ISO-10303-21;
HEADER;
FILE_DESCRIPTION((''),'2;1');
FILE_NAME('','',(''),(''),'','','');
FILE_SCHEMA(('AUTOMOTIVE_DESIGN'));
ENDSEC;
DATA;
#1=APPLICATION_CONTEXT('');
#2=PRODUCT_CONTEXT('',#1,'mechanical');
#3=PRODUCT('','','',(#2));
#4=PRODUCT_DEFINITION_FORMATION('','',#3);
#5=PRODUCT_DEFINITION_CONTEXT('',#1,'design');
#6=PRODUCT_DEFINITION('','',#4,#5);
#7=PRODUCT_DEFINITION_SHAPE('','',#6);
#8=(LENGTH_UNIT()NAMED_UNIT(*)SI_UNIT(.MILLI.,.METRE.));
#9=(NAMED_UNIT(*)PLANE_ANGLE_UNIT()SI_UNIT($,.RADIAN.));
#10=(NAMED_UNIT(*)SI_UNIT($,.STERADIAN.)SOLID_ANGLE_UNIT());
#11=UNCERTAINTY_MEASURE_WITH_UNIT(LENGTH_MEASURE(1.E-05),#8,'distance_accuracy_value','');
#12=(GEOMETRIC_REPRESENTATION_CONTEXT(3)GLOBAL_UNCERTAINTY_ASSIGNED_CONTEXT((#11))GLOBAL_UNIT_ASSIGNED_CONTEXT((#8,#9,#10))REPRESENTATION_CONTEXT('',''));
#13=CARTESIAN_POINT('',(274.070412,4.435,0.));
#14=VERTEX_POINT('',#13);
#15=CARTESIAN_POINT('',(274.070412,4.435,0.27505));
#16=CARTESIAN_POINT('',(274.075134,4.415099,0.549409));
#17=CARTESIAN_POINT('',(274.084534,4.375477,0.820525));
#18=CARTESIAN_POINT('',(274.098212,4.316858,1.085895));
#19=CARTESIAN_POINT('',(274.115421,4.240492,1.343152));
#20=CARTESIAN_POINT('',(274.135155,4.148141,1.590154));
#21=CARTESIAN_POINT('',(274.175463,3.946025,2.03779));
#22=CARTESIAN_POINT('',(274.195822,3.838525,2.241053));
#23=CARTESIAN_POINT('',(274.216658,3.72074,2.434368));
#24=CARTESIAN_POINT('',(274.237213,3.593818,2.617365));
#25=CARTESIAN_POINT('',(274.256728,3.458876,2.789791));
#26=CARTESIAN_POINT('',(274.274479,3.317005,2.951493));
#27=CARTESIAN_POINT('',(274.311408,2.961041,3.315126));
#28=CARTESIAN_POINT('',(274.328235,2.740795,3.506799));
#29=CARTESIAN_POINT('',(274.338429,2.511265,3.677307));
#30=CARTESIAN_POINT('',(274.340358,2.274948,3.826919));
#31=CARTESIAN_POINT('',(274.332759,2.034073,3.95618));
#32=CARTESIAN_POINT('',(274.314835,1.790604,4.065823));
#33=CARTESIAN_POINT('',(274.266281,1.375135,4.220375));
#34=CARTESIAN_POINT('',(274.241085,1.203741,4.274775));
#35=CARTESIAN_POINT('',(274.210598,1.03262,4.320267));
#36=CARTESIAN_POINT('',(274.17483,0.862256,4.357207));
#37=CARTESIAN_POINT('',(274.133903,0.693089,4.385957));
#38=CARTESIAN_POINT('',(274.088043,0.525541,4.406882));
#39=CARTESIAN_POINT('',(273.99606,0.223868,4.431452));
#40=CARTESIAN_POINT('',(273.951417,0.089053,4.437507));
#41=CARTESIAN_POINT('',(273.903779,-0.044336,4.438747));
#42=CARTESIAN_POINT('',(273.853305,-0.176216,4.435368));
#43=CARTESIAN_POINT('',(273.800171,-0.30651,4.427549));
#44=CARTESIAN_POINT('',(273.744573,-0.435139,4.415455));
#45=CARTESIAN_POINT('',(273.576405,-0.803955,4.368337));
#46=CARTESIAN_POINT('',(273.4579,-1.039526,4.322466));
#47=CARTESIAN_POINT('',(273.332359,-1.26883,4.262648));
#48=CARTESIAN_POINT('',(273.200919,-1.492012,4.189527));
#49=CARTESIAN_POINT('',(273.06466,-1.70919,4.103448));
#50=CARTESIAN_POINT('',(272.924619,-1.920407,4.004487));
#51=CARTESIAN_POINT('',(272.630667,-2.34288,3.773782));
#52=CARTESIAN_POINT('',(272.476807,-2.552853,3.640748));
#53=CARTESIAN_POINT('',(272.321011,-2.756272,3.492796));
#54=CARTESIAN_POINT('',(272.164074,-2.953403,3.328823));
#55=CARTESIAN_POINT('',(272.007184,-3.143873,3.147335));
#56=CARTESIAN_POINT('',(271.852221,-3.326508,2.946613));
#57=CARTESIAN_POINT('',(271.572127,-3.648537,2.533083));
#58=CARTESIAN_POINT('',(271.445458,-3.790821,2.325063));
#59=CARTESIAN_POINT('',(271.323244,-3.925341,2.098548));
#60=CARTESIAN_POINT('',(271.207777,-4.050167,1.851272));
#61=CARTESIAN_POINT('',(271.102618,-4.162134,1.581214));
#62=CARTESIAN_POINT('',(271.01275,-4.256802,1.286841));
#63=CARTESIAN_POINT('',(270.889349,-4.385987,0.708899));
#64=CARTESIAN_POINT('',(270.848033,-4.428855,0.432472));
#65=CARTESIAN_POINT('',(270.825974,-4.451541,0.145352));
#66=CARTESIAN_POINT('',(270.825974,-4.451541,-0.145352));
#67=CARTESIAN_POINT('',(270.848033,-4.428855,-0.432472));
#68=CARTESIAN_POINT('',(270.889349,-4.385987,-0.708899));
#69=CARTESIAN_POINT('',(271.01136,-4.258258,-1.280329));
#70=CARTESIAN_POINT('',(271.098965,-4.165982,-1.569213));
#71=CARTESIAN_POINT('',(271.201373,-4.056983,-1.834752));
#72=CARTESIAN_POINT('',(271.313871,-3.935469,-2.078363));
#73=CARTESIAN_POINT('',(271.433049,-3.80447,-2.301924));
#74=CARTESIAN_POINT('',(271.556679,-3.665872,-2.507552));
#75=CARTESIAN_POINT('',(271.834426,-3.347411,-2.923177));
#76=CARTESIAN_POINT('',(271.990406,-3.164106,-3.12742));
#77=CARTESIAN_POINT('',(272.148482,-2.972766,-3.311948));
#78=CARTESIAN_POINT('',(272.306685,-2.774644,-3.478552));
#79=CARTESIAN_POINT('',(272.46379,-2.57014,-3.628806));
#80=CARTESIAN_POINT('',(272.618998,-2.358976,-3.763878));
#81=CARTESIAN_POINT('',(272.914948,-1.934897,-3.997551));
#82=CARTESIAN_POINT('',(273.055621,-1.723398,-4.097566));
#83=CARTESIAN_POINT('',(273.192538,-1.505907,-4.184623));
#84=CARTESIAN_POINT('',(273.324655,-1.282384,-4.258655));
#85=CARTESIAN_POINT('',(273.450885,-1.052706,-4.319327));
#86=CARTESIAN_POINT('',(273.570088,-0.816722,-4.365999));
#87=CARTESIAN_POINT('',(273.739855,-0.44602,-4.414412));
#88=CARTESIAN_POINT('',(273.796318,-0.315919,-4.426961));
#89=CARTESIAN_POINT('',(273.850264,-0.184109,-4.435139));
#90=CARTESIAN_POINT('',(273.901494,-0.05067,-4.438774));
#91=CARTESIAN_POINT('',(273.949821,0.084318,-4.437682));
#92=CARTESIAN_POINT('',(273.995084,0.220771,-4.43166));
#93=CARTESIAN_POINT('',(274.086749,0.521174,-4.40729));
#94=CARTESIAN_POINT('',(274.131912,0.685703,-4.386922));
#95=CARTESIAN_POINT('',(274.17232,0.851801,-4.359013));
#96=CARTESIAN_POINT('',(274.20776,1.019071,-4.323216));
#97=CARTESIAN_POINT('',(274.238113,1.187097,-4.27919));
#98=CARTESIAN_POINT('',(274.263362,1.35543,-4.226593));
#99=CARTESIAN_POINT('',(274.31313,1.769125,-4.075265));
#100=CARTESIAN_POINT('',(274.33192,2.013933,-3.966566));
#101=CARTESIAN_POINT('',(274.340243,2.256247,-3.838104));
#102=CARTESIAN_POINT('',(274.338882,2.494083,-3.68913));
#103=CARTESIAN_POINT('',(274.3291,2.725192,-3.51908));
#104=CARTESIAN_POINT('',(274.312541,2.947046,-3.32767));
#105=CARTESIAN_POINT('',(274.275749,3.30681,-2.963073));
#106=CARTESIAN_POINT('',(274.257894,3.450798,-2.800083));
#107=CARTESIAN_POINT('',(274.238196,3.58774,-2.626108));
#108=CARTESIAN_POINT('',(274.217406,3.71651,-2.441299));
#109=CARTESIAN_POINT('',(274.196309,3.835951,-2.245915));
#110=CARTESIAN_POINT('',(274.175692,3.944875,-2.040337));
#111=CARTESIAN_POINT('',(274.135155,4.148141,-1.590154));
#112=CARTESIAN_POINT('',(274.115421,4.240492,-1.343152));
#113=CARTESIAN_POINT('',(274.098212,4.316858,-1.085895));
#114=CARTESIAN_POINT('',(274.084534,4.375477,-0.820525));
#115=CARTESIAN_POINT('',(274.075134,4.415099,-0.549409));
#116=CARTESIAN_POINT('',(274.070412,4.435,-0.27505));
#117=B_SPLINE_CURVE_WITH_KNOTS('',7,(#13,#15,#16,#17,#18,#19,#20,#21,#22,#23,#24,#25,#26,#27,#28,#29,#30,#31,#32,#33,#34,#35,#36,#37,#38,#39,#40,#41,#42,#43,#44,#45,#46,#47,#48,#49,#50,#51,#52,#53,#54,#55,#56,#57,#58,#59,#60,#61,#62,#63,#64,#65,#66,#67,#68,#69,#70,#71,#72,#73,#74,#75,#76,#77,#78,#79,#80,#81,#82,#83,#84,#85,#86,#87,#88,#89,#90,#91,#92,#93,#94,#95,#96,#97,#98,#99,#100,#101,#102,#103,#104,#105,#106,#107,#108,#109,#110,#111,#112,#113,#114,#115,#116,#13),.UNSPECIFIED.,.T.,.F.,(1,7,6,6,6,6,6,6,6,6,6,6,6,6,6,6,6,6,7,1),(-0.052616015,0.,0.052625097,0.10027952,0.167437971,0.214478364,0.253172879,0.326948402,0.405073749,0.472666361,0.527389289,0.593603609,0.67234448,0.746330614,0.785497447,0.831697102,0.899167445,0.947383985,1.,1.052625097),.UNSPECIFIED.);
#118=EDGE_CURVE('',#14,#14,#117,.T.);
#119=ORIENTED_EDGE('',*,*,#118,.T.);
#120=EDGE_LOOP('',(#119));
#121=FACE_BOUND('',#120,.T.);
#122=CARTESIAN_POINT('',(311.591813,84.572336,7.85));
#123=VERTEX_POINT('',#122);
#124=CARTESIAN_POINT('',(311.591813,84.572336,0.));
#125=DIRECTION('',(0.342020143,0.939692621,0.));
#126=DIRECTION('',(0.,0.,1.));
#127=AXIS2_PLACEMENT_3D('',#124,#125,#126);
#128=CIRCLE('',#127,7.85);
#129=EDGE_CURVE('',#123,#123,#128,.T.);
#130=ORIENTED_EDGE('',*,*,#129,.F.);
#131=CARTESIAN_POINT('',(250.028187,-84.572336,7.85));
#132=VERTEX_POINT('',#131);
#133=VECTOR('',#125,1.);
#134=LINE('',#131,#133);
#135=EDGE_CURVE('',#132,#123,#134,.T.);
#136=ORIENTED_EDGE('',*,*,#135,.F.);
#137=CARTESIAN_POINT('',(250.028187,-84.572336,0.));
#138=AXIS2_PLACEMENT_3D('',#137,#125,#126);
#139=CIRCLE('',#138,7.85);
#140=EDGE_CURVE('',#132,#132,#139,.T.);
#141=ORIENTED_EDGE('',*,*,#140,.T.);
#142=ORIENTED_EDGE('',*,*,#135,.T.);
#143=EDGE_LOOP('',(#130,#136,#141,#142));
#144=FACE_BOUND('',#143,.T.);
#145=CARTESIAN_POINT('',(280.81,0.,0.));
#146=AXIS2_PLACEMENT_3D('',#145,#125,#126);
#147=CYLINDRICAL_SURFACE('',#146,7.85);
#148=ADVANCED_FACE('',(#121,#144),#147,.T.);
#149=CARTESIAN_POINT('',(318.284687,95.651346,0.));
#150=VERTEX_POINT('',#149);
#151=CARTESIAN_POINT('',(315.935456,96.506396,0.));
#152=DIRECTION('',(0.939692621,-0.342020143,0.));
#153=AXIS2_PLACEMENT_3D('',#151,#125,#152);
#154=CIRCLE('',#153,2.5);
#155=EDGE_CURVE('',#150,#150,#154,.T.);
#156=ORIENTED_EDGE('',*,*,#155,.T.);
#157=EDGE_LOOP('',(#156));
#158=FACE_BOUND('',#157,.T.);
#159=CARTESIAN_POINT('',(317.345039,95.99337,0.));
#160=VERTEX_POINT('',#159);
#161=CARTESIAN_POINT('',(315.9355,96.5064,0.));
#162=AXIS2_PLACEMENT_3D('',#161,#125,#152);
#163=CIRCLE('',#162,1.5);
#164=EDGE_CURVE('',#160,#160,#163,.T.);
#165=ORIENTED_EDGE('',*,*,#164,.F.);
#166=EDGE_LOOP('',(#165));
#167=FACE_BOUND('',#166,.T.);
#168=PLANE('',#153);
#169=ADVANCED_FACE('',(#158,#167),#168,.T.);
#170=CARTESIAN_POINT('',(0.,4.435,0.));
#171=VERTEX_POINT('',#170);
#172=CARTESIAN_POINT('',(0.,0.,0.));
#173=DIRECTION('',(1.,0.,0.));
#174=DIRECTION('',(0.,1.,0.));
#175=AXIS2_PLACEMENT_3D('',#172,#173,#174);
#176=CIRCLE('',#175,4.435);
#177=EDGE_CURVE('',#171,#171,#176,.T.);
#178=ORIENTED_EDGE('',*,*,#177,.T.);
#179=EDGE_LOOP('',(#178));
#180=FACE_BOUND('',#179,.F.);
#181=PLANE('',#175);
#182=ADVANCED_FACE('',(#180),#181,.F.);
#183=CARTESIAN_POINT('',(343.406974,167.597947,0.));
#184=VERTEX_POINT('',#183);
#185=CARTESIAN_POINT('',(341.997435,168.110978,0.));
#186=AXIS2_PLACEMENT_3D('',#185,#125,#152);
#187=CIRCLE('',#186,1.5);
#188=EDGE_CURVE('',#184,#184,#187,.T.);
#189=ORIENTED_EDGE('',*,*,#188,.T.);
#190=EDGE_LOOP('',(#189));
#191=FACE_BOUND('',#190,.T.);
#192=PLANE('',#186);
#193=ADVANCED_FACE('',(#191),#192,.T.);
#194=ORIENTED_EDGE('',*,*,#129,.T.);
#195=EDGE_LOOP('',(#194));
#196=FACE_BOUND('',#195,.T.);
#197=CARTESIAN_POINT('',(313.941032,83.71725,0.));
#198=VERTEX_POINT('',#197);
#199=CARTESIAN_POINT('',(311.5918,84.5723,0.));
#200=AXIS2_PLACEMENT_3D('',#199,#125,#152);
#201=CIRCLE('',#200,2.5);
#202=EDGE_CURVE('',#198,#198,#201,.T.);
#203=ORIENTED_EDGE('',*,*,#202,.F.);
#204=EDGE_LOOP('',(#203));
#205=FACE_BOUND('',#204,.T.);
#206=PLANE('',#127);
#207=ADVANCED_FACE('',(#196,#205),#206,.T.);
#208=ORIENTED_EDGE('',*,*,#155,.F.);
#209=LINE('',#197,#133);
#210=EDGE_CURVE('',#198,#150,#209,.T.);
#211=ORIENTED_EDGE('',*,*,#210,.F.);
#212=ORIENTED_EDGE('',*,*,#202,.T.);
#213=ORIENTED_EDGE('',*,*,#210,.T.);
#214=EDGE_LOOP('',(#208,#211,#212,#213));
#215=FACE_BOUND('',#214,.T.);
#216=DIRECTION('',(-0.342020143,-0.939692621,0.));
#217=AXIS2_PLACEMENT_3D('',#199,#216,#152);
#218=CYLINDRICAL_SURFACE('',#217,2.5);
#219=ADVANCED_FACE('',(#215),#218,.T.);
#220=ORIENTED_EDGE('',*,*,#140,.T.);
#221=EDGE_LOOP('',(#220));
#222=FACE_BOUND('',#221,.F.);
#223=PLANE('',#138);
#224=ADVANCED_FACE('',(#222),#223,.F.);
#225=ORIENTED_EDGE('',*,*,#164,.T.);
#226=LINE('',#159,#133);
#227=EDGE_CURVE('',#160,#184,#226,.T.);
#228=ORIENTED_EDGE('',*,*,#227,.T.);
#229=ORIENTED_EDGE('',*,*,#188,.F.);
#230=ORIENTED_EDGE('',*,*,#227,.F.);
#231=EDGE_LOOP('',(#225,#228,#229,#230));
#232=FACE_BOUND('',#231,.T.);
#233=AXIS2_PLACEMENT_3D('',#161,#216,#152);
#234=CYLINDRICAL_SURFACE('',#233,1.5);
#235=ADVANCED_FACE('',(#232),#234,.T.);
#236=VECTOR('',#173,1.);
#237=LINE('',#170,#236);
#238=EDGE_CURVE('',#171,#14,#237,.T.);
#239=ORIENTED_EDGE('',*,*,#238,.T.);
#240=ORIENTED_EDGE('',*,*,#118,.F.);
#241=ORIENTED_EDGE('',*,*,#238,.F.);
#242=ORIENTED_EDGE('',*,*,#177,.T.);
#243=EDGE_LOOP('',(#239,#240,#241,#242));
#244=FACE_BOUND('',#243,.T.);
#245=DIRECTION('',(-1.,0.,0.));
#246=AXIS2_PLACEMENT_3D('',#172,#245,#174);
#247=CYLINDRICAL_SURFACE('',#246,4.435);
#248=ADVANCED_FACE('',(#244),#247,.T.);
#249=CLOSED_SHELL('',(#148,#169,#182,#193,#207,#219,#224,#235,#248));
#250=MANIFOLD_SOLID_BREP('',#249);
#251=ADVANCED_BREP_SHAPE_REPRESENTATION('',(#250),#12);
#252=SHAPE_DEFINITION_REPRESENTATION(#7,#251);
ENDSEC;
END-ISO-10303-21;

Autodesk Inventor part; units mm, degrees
ref_plane "YZ Plane" through (0, 0, 0) normal (1, 0, 0) x (0, 1, 0)
ref_plane "XZ Plane" through (0, 0, 0) normal (0, 1, 0) x (-1, 0, 0)
ref_plane "XY Plane" through (0, 0, 0) normal (0, 0, 1) x (1, 0, 0)
sketch "Sketch1" plane through (0, 0, 0) normal (1, 0, 0) x (0, 1, 0)
  circle A0 centre (0, 0) radius 4.435
  dimension "d0" = 8.87
extrude "Extrusion1" add sketch "Sketch1" along normal blind 280.8
sketch "Sketch2" plane through (280.8, 0, 0) normal (1, 0, 0) x (0, 0, -1)
  circle A0 centre (0, 0) radius 4.435 projected
  line L0 (0, 0) -> (8.3226, 0)
  line L1 (0.8914, 0) -> (-7.5966, 0)
  arc A1 (-4.435, 0) -> (4.435, 0) centre (0, 0) ccw
extrude "Extrusion2" add sketch "Sketch2" along normal blind 0.01 contours A0 L1 L0 picked at (-2.4155, -1.6673)
ref_plane "Work Plane1" through (280.81, 0, 0) normal (0.3420201, 0.9396926, 0) x (0, 0, 1)
sketch "Sketch4" plane through (280.81, 0, 0) normal (0.3420201, 0.9396926, 0) x (0, 0, 1)
  line L0 (4.435, -0.0094) -> (-4.435, -0.0094) projected
  ellipse E0 centre (0, -0.0094) end of major axis (-4.435, -0.0094) minor radius 1.5169 (-4.435, -0.0094) -> (4.435, -0.0094) ccw projected
  line L1 (-4.435, 0) -> (4.435, 0) projected
  ellipse E1 centre (0, 0) end of major axis (-4.435, 0) minor radius 1.5169 (4.435, 0) -> (-4.435, 0) ccw projected
  circle A0 centre (0, 0) radius 7.85
  point P0 (0, -263.8751)
  dimension "d11" = 15.7
extrude "Extrusion4" add sketch "Sketch4" along normal blind 90 and the other way blind 90 contours E0 L0 | E1 L1 | A0
sketch "Sketch6" plane through (311.5918, 84.5723, 0) normal (0.3420201, 0.9396926, 0) x (0.9396926, -0.3420201, 0)
  circle A0 centre (0, 0) radius 7.85 projected
  circle A1 centre (0, 0) radius 1 projected
  circle A2 centre (0, 0) radius 2.5
  point P0 (-263.8751, 0)
  dimension "d19" = 5
extrude "Extrusion6" add sketch "Sketch6" along normal blind 12.7 contours A1 | A2
sketch "Sketch7" plane through (315.9355, 96.5064, 0) normal (0.3420201, 0.9396926, 0) x (0.9396926, -0.3420201, 0)
  circle A0 centre (0, 0) radius 2.5 projected
  circle A1 centre (0, 0) radius 1.5
  point P0 (-263.8751, 0)
  dimension "d22" = 3
extrude "Extrusion7" add sketch "Sketch7" along normal blind 76.2 contours A1
properties part number "Piston_Model"
